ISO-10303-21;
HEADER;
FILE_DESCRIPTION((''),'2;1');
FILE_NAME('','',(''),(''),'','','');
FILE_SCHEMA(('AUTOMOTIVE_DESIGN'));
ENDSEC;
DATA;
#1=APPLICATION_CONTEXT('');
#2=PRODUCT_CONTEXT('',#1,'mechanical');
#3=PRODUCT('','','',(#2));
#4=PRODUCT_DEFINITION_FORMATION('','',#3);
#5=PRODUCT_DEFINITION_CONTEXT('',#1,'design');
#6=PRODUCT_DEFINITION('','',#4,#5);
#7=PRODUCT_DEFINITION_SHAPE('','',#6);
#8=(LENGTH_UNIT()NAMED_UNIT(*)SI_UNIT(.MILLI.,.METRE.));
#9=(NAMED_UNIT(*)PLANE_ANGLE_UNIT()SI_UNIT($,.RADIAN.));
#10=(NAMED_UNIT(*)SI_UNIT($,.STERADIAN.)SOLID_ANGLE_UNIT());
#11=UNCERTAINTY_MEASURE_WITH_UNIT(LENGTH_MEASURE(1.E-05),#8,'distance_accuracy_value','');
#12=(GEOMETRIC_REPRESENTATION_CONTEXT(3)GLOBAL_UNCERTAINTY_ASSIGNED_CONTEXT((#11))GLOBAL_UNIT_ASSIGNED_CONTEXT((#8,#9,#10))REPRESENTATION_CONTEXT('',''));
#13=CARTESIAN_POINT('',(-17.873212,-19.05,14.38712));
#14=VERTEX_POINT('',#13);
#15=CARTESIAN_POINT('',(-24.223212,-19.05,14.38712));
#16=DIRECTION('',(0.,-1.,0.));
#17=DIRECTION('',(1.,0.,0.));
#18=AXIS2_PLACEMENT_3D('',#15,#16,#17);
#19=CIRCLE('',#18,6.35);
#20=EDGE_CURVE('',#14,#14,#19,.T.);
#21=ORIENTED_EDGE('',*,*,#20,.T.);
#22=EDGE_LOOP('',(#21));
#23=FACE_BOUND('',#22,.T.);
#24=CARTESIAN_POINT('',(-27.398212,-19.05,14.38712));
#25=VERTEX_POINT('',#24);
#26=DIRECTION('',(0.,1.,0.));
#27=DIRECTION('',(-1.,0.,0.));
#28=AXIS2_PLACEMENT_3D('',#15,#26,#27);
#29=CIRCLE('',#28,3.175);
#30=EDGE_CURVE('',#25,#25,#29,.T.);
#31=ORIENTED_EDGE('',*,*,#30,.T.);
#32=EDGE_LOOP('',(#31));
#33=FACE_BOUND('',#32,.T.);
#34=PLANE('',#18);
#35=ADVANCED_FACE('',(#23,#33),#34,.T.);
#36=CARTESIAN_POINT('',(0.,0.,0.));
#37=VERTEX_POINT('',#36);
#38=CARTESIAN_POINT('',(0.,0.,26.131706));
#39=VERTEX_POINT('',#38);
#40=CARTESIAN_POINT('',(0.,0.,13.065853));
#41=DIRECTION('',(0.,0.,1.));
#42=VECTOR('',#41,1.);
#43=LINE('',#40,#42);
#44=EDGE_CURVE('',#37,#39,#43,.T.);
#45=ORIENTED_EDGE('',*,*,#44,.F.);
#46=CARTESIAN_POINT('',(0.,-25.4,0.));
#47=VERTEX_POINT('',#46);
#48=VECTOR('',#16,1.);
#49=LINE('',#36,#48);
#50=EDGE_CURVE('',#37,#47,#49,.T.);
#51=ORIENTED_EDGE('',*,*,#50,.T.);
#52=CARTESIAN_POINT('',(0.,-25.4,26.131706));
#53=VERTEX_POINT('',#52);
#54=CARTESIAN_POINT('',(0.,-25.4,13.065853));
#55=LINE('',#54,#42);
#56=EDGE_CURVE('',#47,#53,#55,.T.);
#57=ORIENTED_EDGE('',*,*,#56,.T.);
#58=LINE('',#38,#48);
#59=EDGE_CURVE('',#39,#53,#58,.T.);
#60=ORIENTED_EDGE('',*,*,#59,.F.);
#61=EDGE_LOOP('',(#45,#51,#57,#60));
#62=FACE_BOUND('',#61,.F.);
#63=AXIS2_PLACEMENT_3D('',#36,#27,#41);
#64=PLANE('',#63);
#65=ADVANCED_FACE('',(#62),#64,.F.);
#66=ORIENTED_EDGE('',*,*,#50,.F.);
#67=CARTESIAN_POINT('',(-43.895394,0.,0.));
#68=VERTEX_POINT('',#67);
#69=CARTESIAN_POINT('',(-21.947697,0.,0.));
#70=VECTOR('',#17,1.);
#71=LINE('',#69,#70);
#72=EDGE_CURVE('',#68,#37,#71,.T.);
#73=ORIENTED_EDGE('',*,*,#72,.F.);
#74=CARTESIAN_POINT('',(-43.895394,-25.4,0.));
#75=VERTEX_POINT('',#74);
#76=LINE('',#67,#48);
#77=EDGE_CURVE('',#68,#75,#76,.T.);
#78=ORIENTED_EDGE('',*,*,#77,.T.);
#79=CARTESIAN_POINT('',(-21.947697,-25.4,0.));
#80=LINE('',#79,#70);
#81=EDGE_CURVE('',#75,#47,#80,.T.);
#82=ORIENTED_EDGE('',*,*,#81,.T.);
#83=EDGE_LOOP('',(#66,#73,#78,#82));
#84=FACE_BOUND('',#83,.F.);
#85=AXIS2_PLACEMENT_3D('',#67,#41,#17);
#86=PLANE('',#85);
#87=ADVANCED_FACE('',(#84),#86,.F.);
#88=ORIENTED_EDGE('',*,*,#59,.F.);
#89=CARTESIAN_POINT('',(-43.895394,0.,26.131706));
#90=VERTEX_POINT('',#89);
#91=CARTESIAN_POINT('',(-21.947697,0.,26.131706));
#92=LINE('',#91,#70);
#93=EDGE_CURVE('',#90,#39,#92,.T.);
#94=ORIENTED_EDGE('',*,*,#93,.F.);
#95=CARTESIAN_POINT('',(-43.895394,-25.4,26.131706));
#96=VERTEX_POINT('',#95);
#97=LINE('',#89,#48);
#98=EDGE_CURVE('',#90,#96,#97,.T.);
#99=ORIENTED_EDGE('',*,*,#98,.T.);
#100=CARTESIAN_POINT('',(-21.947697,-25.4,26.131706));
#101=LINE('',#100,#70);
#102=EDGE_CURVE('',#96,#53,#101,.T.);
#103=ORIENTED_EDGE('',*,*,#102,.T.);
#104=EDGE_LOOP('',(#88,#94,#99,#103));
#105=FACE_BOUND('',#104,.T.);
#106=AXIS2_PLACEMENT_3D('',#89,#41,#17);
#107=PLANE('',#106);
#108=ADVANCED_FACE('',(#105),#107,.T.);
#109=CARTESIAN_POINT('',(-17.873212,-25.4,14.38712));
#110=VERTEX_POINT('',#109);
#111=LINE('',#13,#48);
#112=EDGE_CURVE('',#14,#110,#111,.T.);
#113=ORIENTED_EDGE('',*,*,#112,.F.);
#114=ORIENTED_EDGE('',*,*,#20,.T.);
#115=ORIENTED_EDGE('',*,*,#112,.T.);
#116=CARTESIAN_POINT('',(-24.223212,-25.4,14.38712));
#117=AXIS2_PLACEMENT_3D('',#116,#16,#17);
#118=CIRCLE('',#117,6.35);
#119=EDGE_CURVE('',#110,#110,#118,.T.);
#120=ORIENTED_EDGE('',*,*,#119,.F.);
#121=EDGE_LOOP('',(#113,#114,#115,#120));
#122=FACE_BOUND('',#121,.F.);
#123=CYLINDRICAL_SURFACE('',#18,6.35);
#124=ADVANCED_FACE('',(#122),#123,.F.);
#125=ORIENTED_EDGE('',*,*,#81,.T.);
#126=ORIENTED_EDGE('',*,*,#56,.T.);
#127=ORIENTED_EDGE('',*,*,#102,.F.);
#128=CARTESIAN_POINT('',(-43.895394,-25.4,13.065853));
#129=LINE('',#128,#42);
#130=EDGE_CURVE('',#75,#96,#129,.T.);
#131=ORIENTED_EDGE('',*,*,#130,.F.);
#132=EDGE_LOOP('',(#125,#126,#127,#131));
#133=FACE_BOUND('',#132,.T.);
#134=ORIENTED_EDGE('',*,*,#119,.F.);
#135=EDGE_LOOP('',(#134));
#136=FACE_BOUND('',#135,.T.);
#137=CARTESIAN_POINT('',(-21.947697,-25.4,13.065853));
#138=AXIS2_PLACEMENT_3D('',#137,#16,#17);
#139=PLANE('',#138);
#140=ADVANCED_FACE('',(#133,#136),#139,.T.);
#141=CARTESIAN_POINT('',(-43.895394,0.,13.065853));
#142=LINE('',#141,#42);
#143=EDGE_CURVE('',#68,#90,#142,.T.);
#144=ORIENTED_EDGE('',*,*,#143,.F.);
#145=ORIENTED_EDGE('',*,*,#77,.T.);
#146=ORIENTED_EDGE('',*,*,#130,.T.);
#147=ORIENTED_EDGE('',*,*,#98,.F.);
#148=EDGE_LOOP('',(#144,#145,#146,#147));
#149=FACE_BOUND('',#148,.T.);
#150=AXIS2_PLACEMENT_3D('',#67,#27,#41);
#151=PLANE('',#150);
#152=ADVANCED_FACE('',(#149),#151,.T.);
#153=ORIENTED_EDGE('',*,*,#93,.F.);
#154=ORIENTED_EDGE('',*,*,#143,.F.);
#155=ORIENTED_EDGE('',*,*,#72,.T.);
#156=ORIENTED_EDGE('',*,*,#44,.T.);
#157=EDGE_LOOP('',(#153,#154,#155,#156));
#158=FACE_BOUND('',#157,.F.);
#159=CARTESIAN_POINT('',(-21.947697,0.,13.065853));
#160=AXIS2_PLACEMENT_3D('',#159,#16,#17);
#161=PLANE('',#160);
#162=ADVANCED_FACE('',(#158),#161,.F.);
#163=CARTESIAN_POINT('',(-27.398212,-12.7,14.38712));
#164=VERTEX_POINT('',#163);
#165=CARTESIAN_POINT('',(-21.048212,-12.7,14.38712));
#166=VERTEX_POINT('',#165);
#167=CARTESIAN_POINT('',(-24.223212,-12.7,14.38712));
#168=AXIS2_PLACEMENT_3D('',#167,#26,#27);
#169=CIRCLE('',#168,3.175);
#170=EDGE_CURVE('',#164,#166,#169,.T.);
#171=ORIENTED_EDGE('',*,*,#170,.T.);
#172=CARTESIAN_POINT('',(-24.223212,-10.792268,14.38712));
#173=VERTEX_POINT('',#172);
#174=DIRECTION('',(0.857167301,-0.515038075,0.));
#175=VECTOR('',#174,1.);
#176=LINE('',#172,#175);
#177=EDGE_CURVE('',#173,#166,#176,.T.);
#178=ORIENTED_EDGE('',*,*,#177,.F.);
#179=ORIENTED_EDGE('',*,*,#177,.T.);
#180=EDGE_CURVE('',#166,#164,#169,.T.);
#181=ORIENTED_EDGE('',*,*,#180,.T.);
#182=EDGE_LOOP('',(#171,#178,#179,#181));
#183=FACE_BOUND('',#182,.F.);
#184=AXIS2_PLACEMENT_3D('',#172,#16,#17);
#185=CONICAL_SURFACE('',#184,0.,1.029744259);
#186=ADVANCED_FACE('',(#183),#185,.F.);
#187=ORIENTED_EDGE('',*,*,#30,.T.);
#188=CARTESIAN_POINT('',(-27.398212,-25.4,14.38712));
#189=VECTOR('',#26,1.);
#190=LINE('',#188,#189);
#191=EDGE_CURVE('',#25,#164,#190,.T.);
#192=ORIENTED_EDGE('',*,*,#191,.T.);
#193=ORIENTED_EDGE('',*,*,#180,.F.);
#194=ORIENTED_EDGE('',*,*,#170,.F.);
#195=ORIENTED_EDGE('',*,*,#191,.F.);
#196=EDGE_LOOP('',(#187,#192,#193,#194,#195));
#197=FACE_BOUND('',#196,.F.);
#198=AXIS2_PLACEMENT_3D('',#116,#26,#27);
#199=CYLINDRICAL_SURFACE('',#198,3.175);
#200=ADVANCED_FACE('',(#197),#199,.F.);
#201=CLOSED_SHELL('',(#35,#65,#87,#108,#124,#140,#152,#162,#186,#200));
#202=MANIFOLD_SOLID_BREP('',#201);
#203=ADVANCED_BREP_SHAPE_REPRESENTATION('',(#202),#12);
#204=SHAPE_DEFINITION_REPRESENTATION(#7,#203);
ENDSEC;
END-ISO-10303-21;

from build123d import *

# Parameters (mm, degrees)
F0_W           = 43.89539361
F0_H           = 26.1317063123
F1_DEPTH       = 25.4
F3_D           = 6.35
F3_DEPTH       = 12.7
F3_CBORE_D     = 12.7
F3_CBORE_DEPTH = 6.35
F3_TIP         = 1.9077324654


with BuildPart() as f1:
    # F0 (on Front) → F1 (new body)
    with BuildSketch(Plane.XZ):
        with Locations((-21.947696805, 13.0658531561)):
            Rectangle(F0_W, F0_H)
    extrude(amount=F1_DEPTH)

    # F3
    with Locations(Plane.XZ.offset(25.4)):
        with Locations((-24.2232121527, 14.3871195614)):
            CounterBoreHole(F3_D / 2, F3_CBORE_D / 2, F3_CBORE_DEPTH, depth=F3_DEPTH)
            with Locations((0, 0, -(F3_DEPTH + F3_TIP / 2))):  # 118° drill point
                Cone(0, F3_D / 2, F3_TIP, mode=Mode.SUBTRACT)


solid = f1.part
